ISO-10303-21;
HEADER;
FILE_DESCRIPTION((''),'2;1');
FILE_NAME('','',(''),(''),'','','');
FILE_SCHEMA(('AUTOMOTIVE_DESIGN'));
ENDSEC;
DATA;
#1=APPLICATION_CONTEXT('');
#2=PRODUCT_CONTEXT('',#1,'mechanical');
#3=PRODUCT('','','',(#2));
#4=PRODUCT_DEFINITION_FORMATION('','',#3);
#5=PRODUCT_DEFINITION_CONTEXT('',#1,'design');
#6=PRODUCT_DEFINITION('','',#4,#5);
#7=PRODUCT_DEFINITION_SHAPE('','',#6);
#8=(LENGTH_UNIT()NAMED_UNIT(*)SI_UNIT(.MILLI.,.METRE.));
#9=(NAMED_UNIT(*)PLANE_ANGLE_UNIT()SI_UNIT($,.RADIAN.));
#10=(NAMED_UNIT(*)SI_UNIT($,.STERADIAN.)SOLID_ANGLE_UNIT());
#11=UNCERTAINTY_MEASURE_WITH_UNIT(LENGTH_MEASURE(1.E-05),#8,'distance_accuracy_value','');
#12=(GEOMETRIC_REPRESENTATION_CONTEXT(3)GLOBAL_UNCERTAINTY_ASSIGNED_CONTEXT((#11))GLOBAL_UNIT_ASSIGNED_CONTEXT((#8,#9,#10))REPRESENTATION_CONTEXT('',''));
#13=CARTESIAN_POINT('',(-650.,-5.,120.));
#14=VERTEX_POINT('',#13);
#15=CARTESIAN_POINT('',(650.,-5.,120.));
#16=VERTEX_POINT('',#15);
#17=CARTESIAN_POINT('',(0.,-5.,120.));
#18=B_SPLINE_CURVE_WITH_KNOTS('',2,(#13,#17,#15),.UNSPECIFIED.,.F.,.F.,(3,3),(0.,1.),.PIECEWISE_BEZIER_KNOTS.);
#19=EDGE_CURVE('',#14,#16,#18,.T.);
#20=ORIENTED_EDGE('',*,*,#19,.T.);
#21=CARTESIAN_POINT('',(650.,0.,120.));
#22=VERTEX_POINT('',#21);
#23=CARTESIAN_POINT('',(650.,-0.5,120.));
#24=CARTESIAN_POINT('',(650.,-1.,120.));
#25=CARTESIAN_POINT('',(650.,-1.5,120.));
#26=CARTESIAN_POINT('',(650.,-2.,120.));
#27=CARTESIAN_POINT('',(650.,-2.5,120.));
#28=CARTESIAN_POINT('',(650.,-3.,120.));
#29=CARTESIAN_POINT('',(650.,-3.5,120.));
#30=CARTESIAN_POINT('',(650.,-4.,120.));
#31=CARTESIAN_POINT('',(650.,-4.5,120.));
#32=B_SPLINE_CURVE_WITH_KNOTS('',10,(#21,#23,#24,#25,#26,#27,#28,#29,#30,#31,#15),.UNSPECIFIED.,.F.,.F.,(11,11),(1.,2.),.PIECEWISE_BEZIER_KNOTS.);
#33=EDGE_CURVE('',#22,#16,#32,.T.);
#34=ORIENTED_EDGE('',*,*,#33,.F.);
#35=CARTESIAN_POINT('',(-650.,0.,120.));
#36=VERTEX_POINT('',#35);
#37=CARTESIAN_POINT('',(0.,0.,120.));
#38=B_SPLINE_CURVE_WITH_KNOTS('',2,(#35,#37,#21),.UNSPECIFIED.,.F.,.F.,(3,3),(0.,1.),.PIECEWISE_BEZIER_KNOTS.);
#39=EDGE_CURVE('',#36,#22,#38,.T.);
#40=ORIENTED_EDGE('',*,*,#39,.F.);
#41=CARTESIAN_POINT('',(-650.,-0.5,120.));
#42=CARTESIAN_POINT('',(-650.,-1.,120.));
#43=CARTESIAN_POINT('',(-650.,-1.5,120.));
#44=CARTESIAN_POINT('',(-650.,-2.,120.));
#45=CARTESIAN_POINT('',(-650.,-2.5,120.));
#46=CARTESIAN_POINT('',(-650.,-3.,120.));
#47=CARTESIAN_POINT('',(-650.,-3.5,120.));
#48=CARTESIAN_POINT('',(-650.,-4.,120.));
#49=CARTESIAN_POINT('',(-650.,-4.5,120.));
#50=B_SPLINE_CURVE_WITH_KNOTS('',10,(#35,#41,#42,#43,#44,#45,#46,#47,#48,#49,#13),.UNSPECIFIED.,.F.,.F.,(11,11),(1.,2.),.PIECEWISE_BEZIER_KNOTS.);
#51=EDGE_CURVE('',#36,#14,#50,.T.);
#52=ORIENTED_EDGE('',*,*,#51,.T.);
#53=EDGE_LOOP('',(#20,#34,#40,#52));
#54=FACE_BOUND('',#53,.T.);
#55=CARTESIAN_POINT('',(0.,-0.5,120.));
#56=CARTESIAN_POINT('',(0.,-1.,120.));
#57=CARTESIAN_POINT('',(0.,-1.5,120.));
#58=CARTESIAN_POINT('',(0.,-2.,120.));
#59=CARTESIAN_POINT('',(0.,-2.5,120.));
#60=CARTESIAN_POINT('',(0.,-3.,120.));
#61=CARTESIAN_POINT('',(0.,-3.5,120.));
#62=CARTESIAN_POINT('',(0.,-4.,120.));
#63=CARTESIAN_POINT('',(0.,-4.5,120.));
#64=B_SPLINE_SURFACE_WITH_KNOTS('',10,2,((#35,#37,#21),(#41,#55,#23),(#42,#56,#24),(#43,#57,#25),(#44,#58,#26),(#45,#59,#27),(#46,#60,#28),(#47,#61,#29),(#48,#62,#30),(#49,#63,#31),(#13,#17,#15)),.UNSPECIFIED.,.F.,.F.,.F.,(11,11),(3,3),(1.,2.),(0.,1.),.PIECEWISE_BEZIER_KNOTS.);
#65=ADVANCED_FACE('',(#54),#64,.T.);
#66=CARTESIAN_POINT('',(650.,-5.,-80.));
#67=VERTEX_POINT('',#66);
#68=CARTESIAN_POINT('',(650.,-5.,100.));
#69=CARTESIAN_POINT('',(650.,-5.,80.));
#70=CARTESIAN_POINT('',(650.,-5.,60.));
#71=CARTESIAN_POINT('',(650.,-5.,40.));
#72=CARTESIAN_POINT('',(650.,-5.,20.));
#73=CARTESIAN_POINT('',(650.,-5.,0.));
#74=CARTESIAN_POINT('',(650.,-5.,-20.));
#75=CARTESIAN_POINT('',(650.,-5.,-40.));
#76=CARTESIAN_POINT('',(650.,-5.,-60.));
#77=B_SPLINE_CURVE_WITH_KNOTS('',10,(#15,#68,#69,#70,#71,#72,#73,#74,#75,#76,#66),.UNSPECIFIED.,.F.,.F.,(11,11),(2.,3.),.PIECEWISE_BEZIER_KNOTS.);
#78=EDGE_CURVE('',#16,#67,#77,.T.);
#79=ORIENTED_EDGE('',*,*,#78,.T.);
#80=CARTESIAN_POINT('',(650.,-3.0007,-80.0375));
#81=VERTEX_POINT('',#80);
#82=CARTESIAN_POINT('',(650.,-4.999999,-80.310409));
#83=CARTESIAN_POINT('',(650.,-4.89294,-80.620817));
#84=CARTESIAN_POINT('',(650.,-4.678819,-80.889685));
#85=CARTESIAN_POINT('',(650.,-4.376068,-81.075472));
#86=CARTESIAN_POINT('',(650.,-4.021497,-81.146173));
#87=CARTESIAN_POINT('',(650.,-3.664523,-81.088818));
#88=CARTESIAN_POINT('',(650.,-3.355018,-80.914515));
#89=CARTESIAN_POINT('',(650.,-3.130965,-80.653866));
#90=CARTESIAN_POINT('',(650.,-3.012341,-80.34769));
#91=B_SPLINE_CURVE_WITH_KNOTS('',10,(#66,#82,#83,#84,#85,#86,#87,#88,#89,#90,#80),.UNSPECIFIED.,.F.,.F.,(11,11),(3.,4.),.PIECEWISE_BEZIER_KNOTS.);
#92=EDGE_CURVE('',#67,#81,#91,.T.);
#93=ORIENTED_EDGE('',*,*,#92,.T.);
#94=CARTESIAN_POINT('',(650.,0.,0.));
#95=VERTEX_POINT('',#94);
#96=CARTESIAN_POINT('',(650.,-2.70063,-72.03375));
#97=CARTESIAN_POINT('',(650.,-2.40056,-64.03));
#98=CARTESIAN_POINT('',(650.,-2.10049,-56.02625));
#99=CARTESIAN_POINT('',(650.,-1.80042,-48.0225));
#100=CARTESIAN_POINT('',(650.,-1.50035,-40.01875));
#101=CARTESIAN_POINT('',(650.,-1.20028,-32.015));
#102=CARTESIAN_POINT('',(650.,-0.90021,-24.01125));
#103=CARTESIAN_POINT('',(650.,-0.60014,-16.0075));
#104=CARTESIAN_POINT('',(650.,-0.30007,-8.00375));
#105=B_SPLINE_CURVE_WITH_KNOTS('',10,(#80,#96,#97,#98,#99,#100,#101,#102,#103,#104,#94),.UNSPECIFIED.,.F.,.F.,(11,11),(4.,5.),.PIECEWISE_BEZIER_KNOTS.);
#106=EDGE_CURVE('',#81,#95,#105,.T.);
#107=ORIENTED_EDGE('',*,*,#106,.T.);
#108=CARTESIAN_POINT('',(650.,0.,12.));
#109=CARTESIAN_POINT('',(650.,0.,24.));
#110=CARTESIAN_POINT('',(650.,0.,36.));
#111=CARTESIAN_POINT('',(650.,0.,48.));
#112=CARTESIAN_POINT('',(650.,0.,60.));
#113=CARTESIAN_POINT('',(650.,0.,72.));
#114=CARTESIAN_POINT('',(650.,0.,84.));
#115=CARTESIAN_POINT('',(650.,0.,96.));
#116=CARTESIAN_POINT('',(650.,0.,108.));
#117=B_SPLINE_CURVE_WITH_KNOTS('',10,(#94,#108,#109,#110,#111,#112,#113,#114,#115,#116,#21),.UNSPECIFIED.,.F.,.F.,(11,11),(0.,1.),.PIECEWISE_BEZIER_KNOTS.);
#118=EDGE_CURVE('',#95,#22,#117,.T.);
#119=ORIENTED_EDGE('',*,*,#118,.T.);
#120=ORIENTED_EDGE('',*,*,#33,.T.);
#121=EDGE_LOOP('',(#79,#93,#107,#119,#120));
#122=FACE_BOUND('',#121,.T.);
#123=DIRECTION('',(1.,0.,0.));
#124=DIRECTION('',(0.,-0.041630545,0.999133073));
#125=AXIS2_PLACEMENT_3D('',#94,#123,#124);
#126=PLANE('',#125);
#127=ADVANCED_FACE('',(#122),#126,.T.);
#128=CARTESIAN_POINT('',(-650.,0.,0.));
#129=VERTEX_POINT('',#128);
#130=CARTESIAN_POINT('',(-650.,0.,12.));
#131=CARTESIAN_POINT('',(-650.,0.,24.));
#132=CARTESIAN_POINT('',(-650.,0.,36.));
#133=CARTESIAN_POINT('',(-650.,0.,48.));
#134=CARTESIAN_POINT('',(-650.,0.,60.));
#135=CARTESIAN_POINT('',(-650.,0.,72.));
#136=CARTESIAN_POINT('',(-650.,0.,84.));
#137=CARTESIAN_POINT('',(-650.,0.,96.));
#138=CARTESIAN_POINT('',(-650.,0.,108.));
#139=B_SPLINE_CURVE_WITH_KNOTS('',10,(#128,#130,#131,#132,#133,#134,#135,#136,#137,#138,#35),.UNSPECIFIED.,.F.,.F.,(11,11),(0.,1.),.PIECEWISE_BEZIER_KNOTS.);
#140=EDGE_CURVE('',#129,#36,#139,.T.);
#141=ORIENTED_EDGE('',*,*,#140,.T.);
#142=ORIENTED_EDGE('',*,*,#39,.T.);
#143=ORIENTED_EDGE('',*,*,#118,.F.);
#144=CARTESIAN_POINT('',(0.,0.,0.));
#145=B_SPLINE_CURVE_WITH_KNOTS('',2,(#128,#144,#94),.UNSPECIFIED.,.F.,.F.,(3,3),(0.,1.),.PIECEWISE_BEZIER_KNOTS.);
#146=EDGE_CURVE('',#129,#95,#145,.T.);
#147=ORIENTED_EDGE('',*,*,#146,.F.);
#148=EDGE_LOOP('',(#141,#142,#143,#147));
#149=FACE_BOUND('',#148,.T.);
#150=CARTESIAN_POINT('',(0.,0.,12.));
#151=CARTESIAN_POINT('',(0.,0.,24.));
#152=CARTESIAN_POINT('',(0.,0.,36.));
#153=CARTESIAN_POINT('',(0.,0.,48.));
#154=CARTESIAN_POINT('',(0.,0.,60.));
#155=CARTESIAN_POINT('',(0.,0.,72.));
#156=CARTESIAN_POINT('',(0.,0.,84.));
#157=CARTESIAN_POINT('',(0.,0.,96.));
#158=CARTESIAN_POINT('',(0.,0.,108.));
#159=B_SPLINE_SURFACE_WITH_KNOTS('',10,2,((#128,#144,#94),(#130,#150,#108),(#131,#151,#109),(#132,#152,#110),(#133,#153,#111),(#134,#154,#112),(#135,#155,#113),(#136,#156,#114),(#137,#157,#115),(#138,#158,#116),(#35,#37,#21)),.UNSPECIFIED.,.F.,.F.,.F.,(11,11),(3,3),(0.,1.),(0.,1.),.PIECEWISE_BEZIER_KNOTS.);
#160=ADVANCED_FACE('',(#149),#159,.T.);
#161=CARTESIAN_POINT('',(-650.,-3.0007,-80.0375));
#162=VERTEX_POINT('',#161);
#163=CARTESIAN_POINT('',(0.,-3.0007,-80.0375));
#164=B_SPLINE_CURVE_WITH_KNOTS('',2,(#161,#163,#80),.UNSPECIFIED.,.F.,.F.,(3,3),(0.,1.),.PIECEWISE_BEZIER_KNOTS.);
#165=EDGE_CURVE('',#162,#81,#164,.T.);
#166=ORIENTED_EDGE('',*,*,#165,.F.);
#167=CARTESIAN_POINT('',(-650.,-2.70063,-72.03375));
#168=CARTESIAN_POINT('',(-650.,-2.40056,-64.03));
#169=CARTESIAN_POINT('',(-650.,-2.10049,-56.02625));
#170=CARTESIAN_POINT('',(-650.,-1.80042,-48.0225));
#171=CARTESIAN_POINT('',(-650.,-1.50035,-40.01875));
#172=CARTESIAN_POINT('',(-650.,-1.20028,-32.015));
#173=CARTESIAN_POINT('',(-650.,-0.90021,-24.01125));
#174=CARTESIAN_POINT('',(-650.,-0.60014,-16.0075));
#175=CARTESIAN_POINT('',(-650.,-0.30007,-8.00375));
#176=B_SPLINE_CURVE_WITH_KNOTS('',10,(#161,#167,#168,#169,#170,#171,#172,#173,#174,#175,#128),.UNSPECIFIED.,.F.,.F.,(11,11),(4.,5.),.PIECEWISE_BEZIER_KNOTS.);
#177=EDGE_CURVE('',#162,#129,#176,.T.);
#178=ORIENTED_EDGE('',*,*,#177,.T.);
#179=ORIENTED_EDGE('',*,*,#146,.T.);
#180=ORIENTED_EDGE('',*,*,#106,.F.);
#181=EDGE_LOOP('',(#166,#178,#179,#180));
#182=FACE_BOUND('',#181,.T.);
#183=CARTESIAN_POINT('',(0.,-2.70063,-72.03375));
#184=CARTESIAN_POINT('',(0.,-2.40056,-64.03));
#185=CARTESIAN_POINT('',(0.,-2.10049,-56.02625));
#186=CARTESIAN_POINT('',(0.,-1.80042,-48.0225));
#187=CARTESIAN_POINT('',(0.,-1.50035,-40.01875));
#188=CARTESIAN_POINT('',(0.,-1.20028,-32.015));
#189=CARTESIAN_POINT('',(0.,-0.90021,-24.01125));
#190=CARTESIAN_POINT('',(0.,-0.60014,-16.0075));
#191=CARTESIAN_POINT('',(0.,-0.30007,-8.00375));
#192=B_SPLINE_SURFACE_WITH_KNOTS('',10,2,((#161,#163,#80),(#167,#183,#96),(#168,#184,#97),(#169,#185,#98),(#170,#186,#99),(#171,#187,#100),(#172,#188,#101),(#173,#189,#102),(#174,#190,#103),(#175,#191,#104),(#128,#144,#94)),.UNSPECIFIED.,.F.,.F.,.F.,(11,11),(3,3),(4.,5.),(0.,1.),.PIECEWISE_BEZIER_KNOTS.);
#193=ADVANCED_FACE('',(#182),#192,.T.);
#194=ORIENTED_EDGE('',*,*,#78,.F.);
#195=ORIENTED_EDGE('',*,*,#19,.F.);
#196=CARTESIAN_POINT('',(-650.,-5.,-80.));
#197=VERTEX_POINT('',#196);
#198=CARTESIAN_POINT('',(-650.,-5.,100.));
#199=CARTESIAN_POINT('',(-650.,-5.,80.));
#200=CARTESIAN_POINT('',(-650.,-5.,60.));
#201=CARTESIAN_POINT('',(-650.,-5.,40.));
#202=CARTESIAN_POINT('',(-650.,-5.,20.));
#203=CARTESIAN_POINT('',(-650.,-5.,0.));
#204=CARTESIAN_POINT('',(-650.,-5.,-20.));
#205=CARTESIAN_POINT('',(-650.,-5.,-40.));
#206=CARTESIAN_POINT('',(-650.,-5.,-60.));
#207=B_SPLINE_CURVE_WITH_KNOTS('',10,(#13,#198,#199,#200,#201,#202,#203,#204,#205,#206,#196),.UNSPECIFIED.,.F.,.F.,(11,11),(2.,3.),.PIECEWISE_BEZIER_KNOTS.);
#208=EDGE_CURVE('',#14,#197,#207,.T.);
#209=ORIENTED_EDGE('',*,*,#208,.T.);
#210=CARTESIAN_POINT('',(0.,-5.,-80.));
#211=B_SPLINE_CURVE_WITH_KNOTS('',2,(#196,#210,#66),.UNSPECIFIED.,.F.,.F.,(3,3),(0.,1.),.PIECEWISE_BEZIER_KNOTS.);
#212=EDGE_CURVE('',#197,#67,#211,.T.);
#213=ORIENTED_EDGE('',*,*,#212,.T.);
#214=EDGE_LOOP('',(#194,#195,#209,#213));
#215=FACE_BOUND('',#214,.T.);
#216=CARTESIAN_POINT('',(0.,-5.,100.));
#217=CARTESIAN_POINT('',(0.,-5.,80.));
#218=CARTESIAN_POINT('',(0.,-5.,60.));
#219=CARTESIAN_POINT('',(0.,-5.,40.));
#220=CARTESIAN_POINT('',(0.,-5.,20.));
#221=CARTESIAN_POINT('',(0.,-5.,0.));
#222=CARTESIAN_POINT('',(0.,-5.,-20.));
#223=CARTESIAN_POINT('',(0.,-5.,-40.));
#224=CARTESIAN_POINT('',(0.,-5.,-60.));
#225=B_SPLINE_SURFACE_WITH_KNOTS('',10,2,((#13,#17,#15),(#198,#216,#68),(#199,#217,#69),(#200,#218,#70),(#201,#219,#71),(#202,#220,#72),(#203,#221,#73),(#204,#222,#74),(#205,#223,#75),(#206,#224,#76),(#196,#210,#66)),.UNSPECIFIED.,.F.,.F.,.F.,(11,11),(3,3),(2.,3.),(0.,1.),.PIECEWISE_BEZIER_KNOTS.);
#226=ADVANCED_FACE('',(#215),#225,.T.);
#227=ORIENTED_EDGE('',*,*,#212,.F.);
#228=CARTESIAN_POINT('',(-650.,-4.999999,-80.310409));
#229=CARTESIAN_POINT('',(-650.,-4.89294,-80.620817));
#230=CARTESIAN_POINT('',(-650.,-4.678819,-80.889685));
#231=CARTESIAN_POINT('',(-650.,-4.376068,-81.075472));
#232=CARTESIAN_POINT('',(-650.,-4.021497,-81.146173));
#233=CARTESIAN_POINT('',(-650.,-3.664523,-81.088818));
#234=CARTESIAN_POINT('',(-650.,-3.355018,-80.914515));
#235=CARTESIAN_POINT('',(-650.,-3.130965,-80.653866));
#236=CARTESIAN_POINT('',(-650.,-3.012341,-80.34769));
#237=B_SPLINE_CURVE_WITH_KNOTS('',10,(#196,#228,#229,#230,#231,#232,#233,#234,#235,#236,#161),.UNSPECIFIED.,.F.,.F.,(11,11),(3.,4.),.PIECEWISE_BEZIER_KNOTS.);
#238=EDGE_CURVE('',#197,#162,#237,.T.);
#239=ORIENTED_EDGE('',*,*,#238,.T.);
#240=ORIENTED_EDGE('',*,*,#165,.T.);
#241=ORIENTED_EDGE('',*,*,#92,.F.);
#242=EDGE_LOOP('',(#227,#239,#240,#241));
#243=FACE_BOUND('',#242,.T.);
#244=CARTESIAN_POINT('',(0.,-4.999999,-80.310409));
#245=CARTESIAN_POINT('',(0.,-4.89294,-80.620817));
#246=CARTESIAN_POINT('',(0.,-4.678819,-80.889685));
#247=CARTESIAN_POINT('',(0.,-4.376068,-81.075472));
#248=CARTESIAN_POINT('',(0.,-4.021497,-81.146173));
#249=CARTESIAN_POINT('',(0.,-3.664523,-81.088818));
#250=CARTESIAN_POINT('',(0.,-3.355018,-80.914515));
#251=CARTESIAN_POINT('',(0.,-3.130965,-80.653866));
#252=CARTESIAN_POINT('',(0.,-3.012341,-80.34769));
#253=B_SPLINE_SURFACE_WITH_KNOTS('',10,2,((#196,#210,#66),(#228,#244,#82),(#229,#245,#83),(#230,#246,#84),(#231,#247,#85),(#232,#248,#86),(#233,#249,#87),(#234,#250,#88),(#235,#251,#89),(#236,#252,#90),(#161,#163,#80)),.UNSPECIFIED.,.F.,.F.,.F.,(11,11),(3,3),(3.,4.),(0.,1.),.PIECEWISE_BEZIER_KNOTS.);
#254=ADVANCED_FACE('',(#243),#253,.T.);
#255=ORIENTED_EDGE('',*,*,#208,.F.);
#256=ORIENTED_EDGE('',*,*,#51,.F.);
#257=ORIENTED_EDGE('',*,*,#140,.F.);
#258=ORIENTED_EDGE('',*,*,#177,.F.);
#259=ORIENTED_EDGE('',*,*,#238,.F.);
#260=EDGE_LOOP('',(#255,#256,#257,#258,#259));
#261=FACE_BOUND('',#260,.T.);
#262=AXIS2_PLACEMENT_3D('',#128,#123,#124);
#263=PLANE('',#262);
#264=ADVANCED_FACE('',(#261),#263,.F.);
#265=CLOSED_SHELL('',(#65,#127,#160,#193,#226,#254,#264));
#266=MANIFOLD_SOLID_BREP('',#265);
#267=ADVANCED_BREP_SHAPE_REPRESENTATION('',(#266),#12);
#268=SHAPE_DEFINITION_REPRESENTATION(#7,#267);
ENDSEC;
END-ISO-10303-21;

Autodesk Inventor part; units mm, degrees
ref_plane "XZ Plane" through (0, 0, 0) normal (0, 1, 0) x (-1, 0, 0)
sketch "スケッチ1" plane through (0, 0, 0) normal (1, 0, 0) x (0, 1, 0)
  line L0 (0, 120) -> (0, 0)
  line L1 (0, 0) -> (-3.0007, -80.0375)
  line L2 (-5, -80) -> (-5, 120)
  line L3 (-5, 120) -> (0, 120)
  arc A0 (-5, -80) -> (-3.0007, -80.0375) centre (-4, -80) ccw
  dimension "d0" = 120
  dimension "d1" = 1
  dimension "d2" = 5
  dimension "d3" = 80
ref_plane "作業平面1" through (650, 0, 0) normal (1, 0, 0) x (0, 1, 0)
sketch "スケッチ2" plane through (650, 0, 0) normal (1, 0, 0) x (0, 1, 0)
  line L0 (0, 120) -> (0, 0)
  line L1 (0, 0) -> (-3.0007, -80.0375)
  line L2 (-5, -80) -> (-5, 120)
  line L3 (-5, 120) -> (0, 120)
  arc A0 (-5, -80) -> (-3.0007, -80.0375) centre (-4, -80) ccw
  dimension "d5" = 120
  dimension "d6" = 1
  dimension "d7" = 5
  dimension "d8" = 80
ref_plane "作業平面2" through (-650, 0, 0) normal (1, 0, 0) x (0, 1, 0)
sketch "スケッチ3" plane through (-650, 0, 0) normal (1, 0, 0) x (0, 1, 0)
  line L0 (0, 120) -> (0, 0)
  line L1 (0, 0) -> (-3.0007, -80.0375)
  line L2 (-5, -80) -> (-5, 120)
  line L3 (-5, 120) -> (0, 120)
  arc A0 (-5, -80) -> (-3.0007, -80.0375) centre (-4, -80) ccw
  dimension "d10" = 120
  dimension "d11" = 1
  dimension "d12" = 5
  dimension "d13" = 80
loft "ロフト1" add profiles "スケッチ3", "スケッチ1", "スケッチ2"
properties part number "test_base"
